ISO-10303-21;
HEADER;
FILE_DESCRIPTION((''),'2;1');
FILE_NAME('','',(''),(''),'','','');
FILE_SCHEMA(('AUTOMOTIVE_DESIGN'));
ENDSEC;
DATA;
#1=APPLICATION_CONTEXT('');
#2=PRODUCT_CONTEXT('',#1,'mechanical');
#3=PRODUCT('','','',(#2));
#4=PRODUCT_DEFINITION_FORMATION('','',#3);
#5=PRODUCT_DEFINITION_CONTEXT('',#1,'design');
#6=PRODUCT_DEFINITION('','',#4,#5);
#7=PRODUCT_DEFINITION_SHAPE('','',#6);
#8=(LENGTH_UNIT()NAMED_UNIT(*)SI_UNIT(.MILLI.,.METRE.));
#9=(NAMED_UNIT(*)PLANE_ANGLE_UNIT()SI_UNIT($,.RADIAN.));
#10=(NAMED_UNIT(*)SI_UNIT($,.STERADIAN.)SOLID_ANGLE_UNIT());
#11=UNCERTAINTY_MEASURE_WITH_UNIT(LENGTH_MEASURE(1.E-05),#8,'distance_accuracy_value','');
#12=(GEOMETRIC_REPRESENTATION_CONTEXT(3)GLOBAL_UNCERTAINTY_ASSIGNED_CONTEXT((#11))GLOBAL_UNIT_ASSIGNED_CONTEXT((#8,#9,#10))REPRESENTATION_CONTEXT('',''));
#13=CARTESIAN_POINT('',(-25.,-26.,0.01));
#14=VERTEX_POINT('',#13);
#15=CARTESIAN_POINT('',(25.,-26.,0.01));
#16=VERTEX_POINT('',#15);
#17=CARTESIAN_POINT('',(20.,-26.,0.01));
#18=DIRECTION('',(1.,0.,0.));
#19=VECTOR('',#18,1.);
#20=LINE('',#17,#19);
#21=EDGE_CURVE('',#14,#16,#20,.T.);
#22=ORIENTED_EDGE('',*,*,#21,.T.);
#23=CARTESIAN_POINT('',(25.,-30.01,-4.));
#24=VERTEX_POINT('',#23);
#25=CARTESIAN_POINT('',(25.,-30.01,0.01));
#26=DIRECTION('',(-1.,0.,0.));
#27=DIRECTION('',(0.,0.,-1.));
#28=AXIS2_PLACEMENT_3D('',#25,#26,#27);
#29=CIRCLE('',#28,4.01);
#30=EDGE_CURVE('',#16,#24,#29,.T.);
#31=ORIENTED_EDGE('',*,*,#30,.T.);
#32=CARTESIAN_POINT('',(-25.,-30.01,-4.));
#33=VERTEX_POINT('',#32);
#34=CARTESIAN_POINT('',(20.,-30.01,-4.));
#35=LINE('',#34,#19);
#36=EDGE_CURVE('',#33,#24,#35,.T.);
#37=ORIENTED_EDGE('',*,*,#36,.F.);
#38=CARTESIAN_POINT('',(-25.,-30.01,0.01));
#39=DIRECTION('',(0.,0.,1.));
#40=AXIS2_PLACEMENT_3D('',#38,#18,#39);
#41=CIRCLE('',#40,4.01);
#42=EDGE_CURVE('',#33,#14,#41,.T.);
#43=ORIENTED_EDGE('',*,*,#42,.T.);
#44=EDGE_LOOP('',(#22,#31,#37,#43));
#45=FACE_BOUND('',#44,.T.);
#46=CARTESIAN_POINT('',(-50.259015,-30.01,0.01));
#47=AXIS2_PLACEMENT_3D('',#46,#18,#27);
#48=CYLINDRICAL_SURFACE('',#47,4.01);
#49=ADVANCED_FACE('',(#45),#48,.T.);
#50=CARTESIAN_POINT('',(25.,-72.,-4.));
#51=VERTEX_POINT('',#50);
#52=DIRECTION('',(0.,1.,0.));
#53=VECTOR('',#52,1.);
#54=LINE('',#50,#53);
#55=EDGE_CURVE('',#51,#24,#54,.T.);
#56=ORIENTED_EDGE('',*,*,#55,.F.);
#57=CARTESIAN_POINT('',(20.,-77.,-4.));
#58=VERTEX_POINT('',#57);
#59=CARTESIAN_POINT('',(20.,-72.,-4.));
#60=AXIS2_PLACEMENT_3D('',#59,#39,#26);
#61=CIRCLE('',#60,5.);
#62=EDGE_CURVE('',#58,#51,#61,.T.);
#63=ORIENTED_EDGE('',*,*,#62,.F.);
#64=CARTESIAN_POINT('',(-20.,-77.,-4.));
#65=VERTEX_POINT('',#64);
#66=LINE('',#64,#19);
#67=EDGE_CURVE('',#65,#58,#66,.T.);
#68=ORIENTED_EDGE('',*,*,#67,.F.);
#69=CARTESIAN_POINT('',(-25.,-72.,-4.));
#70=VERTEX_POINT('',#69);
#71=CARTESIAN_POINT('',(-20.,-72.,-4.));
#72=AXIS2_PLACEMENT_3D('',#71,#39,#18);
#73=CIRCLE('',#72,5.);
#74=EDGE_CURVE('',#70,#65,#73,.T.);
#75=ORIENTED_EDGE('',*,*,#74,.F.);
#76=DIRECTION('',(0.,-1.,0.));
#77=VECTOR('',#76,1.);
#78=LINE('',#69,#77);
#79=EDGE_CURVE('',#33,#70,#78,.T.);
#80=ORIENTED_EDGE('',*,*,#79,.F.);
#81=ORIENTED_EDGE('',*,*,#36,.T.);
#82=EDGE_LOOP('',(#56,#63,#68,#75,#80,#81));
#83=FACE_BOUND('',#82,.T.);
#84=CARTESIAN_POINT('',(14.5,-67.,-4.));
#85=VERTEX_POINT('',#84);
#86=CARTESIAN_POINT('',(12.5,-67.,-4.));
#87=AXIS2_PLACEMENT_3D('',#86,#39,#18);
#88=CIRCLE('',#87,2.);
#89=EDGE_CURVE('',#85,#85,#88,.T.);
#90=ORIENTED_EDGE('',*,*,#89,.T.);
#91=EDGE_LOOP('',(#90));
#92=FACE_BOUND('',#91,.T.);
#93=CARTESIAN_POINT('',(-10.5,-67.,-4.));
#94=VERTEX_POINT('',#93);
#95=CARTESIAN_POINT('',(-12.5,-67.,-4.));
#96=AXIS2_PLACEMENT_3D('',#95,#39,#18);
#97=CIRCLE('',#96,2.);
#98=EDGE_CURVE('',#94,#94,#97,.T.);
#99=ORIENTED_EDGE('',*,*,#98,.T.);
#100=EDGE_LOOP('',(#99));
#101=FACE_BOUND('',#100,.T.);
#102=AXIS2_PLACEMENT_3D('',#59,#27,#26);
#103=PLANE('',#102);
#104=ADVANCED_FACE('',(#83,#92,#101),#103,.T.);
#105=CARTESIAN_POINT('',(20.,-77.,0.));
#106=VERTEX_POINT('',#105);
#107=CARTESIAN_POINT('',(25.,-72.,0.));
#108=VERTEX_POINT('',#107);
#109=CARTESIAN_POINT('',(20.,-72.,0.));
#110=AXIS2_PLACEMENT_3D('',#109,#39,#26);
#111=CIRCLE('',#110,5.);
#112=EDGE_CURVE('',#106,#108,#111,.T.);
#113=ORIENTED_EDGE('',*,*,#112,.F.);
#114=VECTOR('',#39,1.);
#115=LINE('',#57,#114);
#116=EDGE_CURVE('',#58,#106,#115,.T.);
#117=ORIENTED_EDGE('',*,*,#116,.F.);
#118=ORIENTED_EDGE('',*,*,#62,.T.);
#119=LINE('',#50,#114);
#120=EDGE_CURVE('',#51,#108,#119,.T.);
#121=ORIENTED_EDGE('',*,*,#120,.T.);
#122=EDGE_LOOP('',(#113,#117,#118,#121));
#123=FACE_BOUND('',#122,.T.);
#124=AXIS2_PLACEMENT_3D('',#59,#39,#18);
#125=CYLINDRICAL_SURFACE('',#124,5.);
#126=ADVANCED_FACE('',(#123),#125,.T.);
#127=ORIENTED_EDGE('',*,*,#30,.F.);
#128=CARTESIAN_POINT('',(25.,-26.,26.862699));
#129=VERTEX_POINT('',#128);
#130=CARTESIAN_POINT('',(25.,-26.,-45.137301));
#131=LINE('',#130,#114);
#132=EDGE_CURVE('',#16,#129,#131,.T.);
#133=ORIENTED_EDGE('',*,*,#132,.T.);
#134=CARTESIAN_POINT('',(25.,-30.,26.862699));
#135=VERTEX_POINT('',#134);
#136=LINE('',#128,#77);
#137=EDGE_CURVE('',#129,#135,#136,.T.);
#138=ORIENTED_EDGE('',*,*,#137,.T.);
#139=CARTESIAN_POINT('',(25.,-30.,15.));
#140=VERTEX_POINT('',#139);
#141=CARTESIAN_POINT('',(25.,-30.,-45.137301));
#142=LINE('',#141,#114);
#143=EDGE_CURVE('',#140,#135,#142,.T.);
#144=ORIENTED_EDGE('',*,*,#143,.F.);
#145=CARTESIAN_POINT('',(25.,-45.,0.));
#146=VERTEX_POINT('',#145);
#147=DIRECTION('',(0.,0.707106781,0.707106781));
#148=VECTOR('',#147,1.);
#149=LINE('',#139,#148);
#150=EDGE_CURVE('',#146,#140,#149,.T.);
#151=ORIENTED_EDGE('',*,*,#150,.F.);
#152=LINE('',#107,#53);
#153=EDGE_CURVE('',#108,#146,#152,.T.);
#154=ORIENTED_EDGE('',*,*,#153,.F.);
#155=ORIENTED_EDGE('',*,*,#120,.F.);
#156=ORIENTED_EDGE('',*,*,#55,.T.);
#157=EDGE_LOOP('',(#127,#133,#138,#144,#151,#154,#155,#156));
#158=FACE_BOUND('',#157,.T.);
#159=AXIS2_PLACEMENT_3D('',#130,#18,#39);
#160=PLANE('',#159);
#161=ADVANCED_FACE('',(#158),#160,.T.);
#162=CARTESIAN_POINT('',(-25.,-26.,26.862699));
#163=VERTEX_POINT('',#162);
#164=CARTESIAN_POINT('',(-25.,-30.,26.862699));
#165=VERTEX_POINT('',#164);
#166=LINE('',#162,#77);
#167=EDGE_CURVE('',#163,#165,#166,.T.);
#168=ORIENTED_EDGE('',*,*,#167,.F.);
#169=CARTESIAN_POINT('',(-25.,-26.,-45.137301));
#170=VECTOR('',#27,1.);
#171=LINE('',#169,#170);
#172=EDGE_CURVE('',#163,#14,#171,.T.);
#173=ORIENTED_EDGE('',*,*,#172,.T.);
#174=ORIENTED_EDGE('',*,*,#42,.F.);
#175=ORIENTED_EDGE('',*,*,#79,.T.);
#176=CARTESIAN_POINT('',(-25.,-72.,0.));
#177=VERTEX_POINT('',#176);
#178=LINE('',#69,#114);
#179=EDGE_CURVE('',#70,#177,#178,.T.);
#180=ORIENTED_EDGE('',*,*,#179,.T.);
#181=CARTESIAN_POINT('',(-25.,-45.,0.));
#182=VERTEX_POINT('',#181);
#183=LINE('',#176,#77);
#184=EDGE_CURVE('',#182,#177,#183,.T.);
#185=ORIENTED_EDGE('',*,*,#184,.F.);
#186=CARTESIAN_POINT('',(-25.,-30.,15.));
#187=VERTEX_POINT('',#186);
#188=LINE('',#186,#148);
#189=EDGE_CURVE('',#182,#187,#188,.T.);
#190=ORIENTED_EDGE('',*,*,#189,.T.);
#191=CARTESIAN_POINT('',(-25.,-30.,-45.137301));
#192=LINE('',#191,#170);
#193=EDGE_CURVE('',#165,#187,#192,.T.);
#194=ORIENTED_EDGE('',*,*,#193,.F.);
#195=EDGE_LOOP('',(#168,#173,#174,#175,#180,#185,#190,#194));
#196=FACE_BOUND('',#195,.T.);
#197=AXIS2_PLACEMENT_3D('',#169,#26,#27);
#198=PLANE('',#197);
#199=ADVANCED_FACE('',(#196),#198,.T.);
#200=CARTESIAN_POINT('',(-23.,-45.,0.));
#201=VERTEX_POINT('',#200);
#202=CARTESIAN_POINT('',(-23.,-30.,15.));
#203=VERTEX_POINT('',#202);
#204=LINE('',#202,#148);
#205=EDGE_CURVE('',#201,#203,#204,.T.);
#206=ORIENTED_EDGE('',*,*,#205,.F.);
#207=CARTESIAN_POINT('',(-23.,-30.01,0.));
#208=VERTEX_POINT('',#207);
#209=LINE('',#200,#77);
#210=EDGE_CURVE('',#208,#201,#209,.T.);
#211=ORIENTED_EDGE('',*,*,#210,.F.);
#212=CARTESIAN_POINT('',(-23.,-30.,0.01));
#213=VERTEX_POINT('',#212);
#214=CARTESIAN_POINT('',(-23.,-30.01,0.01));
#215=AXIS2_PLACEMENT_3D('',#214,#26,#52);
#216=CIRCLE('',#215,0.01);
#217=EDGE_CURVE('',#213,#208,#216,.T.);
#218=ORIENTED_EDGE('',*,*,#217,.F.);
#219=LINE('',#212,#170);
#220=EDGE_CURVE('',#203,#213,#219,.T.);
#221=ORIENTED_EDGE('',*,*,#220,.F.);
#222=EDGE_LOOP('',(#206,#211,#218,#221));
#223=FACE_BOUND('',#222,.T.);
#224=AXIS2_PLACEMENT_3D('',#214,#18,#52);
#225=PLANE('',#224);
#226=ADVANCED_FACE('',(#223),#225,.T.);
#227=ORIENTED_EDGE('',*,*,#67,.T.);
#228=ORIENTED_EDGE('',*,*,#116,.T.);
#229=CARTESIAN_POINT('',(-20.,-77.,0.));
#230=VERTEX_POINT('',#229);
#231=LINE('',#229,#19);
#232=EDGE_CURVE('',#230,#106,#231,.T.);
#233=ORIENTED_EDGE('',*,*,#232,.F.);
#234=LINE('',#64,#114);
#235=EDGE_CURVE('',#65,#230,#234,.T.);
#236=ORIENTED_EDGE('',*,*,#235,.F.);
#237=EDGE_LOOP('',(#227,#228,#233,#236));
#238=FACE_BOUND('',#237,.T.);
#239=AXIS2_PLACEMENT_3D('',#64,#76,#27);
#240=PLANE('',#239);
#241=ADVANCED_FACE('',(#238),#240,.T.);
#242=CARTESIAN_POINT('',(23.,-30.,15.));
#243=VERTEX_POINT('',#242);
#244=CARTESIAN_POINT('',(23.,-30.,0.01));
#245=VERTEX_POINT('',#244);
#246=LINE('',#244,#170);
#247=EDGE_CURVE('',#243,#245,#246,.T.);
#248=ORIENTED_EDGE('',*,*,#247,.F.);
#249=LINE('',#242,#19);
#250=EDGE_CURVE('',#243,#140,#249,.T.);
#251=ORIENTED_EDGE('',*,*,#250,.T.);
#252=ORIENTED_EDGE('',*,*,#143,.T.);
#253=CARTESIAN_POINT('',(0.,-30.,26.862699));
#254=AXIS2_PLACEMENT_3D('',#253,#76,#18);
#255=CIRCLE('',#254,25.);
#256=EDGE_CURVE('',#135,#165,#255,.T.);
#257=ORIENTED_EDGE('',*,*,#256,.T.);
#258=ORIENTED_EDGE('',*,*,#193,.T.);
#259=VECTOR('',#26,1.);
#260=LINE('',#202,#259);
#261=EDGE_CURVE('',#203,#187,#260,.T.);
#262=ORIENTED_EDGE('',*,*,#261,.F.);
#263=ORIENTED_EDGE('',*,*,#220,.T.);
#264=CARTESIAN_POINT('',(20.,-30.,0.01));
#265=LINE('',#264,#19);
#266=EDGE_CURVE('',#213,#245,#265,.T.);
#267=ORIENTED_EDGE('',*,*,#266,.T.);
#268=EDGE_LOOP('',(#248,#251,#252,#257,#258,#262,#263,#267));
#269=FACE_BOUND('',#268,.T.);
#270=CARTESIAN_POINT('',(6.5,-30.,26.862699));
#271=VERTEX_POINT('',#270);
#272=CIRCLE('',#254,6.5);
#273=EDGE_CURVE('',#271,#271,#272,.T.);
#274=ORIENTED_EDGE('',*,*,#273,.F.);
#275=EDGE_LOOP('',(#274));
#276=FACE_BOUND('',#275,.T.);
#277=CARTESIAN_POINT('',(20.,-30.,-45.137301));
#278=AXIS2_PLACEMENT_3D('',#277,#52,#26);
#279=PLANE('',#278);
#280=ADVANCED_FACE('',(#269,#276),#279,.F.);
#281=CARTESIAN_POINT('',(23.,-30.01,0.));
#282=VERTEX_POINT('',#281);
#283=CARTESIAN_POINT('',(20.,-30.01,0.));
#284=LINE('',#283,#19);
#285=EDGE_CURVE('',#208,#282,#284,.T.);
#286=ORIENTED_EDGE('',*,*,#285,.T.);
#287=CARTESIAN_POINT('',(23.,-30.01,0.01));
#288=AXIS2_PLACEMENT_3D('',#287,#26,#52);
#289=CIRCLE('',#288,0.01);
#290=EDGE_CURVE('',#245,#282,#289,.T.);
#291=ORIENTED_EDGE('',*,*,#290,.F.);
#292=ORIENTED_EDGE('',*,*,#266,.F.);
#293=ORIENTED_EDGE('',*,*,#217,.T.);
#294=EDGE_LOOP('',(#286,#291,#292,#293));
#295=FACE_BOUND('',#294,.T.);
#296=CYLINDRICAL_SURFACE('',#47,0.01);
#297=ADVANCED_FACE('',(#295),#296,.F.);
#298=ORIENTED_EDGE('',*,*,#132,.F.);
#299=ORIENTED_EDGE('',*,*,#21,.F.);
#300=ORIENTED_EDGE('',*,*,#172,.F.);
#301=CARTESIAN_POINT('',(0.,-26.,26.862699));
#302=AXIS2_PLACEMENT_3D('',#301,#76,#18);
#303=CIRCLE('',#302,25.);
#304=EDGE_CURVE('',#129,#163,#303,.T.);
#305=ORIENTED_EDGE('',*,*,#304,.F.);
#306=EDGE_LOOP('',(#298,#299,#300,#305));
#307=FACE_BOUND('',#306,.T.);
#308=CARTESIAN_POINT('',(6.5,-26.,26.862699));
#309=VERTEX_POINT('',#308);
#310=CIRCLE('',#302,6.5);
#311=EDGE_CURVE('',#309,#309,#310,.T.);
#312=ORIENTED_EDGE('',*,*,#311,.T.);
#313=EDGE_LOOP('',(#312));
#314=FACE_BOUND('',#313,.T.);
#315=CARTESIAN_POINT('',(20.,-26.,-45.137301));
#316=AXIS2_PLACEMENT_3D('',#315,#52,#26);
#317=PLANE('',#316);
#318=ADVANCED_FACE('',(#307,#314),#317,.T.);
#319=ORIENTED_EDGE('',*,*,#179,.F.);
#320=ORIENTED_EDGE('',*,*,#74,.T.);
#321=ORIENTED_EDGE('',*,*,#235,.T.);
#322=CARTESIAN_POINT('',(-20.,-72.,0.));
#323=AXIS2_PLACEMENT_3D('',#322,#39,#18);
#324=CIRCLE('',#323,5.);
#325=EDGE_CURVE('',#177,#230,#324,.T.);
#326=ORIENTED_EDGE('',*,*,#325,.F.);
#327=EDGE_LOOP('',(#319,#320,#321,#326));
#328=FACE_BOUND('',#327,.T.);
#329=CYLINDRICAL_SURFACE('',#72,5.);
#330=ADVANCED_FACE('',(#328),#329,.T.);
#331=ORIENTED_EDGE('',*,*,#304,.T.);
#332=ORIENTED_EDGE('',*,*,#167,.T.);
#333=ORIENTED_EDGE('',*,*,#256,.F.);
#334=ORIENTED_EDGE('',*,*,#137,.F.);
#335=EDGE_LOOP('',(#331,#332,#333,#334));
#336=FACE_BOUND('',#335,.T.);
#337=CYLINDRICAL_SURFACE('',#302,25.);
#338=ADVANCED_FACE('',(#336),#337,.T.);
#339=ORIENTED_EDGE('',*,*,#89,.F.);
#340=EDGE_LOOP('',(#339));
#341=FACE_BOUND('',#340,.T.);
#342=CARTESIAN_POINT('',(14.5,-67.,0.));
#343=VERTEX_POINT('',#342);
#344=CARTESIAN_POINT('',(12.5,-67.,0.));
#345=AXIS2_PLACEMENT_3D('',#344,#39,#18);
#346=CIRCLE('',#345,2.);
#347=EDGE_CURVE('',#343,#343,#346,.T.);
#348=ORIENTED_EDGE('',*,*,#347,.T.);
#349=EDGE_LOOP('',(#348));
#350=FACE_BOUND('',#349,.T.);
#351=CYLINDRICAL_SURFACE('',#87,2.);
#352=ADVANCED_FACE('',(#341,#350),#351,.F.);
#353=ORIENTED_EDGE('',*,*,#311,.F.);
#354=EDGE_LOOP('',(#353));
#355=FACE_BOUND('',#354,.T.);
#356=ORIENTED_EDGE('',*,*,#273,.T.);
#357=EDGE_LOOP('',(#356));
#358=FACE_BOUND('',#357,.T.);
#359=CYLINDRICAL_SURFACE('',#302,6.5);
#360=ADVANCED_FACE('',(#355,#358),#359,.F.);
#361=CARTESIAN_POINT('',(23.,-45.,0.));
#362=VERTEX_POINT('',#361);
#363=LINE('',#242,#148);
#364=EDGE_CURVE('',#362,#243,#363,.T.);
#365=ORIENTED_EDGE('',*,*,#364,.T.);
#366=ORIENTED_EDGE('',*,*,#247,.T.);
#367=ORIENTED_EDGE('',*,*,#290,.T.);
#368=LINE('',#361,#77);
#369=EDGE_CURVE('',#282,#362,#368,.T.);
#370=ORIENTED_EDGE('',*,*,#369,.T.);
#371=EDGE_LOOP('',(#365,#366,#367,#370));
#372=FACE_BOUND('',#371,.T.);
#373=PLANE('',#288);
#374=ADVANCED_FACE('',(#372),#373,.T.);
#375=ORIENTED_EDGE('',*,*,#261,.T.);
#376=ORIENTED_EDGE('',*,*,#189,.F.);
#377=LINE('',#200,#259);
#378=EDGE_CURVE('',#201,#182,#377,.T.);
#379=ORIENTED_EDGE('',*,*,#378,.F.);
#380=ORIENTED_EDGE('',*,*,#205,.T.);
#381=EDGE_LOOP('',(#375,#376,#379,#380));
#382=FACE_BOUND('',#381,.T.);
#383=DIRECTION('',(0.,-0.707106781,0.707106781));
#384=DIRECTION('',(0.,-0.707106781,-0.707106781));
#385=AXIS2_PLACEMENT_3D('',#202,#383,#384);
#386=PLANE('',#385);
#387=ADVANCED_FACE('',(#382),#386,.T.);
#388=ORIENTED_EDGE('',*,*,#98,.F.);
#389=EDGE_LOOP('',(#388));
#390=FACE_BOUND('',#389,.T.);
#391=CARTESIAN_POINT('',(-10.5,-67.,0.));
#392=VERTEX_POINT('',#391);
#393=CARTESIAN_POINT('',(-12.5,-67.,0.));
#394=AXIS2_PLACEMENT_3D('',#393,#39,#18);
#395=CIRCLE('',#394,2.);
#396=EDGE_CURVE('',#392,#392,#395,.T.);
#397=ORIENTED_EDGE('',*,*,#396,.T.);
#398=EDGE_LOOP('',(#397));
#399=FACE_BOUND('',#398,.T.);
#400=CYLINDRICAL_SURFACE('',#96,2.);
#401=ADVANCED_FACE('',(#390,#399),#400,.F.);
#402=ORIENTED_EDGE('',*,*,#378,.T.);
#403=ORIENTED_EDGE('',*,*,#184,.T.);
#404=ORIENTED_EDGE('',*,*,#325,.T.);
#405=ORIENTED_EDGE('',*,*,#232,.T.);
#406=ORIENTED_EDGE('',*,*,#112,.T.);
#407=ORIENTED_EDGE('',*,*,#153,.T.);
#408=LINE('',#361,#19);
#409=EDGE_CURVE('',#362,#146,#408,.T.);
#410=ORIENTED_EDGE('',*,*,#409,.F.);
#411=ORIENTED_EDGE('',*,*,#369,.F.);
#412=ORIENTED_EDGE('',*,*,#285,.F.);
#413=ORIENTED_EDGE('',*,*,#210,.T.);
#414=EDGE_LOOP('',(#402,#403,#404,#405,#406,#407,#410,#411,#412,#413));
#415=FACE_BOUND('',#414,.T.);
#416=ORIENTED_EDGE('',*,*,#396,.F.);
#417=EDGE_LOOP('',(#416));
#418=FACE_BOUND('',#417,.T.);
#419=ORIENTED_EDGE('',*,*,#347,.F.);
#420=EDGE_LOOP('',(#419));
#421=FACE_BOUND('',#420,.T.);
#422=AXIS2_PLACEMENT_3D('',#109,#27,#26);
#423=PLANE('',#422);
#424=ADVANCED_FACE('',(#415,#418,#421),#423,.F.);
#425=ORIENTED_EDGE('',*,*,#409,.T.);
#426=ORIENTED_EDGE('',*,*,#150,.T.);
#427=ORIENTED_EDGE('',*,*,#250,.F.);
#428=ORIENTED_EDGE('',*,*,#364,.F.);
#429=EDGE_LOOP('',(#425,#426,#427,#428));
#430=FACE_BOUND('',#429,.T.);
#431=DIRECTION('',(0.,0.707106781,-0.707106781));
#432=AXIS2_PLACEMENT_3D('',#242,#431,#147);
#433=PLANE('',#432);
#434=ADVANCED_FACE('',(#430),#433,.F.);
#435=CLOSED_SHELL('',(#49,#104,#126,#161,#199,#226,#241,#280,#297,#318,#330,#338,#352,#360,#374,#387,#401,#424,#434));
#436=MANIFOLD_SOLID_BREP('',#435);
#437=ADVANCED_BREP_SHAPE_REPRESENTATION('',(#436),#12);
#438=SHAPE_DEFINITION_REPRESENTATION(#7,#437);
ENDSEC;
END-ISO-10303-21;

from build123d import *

# Parameters (mm, degrees)
SCHIZZO1_R                           = 6.5
SCHIZZO1_R_2                         = 2
BASE_FLANGIA1_DEPTH                  = 4
PIEGATURA_START                      = -26
PIEGATURA_DELLO_SCHIZZO1_OUTLINE_W   = 50
PIEGATURA_DELLO_SCHIZZO1_OUTLINE_H   = 4
PIEGATURA_DELLO_SCHIZZO1_DEPTH       = 52
PIEGATURA_START_2                    = -30
PIEGATURA_DELLO_SCHIZZO1_2_OUTLINE_R = 6.5
PIEGATURA_DELLO_SCHIZZO1_2_DEPTH     = 4
PIEGATURA_DELLO_SCHIZZO1_3_DEPTH     = 52
PIEGATURA_START_3                    = -25
PIEGATURA_DELLO_SCHIZZO1_4_DEPTH     = 50
ESTRUSIONE_ESTRUSIONE1_DEPTH         = 2


with BuildPart() as part:
    # Base-Flangia1: sheet metal written as solids
    # Schizzo1 → Base-Flangia1 (new body)
    with BuildSketch(Plane.XY):
        with BuildLine():
            Line((-25, -72), (-25, 0))
            ThreePointArc((-25, 0), (0, 25), (25, 0))
            Line((25, 0), (25, -72))
            ThreePointArc((25, -72), (23.535533906, -75.535533906), (20, -77))
            Line((20, -77), (-20, -77))
            ThreePointArc((-20, -77), (-23.535533906, -75.535533906), (-25, -72))
        make_face()
        Circle(SCHIZZO1_R, mode=Mode.SUBTRACT)
        with Locations((-12.5, -67)):
            Circle(SCHIZZO1_R_2, mode=Mode.SUBTRACT)
        with Locations((12.5, -67)):
            Circle(SCHIZZO1_R_2, mode=Mode.SUBTRACT)
    extrude(amount=-BASE_FLANGIA1_DEPTH)

    # Piegatura dello schizzo1: read off the stored shape, not the designer's step
    # Piegatura dello schizzo1 outline → Piegatura dello schizzo1 (cut)
    with BuildSketch(Plane(origin=(0, 0, 0), x_dir=(1, 0, 0), z_dir=(0, 1, 0)).offset(PIEGATURA_START)):
        with Locations((0, 2)):
            Rectangle(PIEGATURA_DELLO_SCHIZZO1_OUTLINE_W, PIEGATURA_DELLO_SCHIZZO1_OUTLINE_H)
    extrude(amount=PIEGATURA_DELLO_SCHIZZO1_DEPTH, mode=Mode.SUBTRACT)

    # Piegatura dello schizzo1 2 outline → Piegatura dello schizzo1 2 (add)
    with BuildSketch(Plane(origin=(0, 0, 0), x_dir=(1, 0, 0), z_dir=(0, 1, 0)).offset(PIEGATURA_START_2)):
        with BuildLine():
            Line((-25, 0), (-25, -26.862699383))
            ThreePointArc((-25, -26.862699383), (0, -51.862699383), (25, -26.862699383))
            Line((25, -26.862699383), (25, 0))
            Line((25, 0), (-25, 0))
        make_face()
        with Locations((0, -26.862699383)):
            Circle(PIEGATURA_DELLO_SCHIZZO1_2_OUTLINE_R, mode=Mode.SUBTRACT)
    extrude(amount=PIEGATURA_DELLO_SCHIZZO1_2_DEPTH)

    # Piegatura dello schizzo1 3 outline → Piegatura dello schizzo1 3 (cut)
    with BuildSketch(Plane.YZ.offset(PIEGATURA_START)):
        with BuildLine():
            ThreePointArc((-26, 0.01), (-27.174501807, -2.825498193), (-30.01, -4))
            Line((-30.01, -4), (-26, -4))
            Line((-26, -4), (-26, 0.01))
        make_face()
    extrude(amount=PIEGATURA_DELLO_SCHIZZO1_3_DEPTH, mode=Mode.SUBTRACT)

    # Piegatura dello schizzo1 4 outline → Piegatura dello schizzo1 4 (add)
    with BuildSketch(Plane.YZ.offset(PIEGATURA_START_3)):
        with BuildLine():
            ThreePointArc((-30, 0.01), (-30.002928932, 0.002928932), (-30.01, 0))
            Line((-30.01, 0), (-30, 0))
            Line((-30, 0), (-30, 0.01))
        make_face()
    extrude(amount=PIEGATURA_DELLO_SCHIZZO1_4_DEPTH)

    # Schizzo13 → Estrusione-Estrusione1 (add)
    with BuildSketch(Plane.ZY.offset(25)):
        with BuildLine():
            Line((0.01, -30), (15, -30))
            Line((15, -30), (0, -45))
            Line((0, -45), (0, -30.01))
            ThreePointArc((0, -30.01), (0.002928932, -30.002928932), (0.01, -30))
        make_face()
    estrusione_estrusione1 = extrude(amount=-ESTRUSIONE_ESTRUSIONE1_DEPTH)

    # Specchia1: Estrusione-Estrusione1 across plane
    add(estrusione_estrusione1.mirror(Plane(origin=(0, 0, 0), x_dir=(0, 0, 1), z_dir=(1, 0, 0))))


solid = part.part
